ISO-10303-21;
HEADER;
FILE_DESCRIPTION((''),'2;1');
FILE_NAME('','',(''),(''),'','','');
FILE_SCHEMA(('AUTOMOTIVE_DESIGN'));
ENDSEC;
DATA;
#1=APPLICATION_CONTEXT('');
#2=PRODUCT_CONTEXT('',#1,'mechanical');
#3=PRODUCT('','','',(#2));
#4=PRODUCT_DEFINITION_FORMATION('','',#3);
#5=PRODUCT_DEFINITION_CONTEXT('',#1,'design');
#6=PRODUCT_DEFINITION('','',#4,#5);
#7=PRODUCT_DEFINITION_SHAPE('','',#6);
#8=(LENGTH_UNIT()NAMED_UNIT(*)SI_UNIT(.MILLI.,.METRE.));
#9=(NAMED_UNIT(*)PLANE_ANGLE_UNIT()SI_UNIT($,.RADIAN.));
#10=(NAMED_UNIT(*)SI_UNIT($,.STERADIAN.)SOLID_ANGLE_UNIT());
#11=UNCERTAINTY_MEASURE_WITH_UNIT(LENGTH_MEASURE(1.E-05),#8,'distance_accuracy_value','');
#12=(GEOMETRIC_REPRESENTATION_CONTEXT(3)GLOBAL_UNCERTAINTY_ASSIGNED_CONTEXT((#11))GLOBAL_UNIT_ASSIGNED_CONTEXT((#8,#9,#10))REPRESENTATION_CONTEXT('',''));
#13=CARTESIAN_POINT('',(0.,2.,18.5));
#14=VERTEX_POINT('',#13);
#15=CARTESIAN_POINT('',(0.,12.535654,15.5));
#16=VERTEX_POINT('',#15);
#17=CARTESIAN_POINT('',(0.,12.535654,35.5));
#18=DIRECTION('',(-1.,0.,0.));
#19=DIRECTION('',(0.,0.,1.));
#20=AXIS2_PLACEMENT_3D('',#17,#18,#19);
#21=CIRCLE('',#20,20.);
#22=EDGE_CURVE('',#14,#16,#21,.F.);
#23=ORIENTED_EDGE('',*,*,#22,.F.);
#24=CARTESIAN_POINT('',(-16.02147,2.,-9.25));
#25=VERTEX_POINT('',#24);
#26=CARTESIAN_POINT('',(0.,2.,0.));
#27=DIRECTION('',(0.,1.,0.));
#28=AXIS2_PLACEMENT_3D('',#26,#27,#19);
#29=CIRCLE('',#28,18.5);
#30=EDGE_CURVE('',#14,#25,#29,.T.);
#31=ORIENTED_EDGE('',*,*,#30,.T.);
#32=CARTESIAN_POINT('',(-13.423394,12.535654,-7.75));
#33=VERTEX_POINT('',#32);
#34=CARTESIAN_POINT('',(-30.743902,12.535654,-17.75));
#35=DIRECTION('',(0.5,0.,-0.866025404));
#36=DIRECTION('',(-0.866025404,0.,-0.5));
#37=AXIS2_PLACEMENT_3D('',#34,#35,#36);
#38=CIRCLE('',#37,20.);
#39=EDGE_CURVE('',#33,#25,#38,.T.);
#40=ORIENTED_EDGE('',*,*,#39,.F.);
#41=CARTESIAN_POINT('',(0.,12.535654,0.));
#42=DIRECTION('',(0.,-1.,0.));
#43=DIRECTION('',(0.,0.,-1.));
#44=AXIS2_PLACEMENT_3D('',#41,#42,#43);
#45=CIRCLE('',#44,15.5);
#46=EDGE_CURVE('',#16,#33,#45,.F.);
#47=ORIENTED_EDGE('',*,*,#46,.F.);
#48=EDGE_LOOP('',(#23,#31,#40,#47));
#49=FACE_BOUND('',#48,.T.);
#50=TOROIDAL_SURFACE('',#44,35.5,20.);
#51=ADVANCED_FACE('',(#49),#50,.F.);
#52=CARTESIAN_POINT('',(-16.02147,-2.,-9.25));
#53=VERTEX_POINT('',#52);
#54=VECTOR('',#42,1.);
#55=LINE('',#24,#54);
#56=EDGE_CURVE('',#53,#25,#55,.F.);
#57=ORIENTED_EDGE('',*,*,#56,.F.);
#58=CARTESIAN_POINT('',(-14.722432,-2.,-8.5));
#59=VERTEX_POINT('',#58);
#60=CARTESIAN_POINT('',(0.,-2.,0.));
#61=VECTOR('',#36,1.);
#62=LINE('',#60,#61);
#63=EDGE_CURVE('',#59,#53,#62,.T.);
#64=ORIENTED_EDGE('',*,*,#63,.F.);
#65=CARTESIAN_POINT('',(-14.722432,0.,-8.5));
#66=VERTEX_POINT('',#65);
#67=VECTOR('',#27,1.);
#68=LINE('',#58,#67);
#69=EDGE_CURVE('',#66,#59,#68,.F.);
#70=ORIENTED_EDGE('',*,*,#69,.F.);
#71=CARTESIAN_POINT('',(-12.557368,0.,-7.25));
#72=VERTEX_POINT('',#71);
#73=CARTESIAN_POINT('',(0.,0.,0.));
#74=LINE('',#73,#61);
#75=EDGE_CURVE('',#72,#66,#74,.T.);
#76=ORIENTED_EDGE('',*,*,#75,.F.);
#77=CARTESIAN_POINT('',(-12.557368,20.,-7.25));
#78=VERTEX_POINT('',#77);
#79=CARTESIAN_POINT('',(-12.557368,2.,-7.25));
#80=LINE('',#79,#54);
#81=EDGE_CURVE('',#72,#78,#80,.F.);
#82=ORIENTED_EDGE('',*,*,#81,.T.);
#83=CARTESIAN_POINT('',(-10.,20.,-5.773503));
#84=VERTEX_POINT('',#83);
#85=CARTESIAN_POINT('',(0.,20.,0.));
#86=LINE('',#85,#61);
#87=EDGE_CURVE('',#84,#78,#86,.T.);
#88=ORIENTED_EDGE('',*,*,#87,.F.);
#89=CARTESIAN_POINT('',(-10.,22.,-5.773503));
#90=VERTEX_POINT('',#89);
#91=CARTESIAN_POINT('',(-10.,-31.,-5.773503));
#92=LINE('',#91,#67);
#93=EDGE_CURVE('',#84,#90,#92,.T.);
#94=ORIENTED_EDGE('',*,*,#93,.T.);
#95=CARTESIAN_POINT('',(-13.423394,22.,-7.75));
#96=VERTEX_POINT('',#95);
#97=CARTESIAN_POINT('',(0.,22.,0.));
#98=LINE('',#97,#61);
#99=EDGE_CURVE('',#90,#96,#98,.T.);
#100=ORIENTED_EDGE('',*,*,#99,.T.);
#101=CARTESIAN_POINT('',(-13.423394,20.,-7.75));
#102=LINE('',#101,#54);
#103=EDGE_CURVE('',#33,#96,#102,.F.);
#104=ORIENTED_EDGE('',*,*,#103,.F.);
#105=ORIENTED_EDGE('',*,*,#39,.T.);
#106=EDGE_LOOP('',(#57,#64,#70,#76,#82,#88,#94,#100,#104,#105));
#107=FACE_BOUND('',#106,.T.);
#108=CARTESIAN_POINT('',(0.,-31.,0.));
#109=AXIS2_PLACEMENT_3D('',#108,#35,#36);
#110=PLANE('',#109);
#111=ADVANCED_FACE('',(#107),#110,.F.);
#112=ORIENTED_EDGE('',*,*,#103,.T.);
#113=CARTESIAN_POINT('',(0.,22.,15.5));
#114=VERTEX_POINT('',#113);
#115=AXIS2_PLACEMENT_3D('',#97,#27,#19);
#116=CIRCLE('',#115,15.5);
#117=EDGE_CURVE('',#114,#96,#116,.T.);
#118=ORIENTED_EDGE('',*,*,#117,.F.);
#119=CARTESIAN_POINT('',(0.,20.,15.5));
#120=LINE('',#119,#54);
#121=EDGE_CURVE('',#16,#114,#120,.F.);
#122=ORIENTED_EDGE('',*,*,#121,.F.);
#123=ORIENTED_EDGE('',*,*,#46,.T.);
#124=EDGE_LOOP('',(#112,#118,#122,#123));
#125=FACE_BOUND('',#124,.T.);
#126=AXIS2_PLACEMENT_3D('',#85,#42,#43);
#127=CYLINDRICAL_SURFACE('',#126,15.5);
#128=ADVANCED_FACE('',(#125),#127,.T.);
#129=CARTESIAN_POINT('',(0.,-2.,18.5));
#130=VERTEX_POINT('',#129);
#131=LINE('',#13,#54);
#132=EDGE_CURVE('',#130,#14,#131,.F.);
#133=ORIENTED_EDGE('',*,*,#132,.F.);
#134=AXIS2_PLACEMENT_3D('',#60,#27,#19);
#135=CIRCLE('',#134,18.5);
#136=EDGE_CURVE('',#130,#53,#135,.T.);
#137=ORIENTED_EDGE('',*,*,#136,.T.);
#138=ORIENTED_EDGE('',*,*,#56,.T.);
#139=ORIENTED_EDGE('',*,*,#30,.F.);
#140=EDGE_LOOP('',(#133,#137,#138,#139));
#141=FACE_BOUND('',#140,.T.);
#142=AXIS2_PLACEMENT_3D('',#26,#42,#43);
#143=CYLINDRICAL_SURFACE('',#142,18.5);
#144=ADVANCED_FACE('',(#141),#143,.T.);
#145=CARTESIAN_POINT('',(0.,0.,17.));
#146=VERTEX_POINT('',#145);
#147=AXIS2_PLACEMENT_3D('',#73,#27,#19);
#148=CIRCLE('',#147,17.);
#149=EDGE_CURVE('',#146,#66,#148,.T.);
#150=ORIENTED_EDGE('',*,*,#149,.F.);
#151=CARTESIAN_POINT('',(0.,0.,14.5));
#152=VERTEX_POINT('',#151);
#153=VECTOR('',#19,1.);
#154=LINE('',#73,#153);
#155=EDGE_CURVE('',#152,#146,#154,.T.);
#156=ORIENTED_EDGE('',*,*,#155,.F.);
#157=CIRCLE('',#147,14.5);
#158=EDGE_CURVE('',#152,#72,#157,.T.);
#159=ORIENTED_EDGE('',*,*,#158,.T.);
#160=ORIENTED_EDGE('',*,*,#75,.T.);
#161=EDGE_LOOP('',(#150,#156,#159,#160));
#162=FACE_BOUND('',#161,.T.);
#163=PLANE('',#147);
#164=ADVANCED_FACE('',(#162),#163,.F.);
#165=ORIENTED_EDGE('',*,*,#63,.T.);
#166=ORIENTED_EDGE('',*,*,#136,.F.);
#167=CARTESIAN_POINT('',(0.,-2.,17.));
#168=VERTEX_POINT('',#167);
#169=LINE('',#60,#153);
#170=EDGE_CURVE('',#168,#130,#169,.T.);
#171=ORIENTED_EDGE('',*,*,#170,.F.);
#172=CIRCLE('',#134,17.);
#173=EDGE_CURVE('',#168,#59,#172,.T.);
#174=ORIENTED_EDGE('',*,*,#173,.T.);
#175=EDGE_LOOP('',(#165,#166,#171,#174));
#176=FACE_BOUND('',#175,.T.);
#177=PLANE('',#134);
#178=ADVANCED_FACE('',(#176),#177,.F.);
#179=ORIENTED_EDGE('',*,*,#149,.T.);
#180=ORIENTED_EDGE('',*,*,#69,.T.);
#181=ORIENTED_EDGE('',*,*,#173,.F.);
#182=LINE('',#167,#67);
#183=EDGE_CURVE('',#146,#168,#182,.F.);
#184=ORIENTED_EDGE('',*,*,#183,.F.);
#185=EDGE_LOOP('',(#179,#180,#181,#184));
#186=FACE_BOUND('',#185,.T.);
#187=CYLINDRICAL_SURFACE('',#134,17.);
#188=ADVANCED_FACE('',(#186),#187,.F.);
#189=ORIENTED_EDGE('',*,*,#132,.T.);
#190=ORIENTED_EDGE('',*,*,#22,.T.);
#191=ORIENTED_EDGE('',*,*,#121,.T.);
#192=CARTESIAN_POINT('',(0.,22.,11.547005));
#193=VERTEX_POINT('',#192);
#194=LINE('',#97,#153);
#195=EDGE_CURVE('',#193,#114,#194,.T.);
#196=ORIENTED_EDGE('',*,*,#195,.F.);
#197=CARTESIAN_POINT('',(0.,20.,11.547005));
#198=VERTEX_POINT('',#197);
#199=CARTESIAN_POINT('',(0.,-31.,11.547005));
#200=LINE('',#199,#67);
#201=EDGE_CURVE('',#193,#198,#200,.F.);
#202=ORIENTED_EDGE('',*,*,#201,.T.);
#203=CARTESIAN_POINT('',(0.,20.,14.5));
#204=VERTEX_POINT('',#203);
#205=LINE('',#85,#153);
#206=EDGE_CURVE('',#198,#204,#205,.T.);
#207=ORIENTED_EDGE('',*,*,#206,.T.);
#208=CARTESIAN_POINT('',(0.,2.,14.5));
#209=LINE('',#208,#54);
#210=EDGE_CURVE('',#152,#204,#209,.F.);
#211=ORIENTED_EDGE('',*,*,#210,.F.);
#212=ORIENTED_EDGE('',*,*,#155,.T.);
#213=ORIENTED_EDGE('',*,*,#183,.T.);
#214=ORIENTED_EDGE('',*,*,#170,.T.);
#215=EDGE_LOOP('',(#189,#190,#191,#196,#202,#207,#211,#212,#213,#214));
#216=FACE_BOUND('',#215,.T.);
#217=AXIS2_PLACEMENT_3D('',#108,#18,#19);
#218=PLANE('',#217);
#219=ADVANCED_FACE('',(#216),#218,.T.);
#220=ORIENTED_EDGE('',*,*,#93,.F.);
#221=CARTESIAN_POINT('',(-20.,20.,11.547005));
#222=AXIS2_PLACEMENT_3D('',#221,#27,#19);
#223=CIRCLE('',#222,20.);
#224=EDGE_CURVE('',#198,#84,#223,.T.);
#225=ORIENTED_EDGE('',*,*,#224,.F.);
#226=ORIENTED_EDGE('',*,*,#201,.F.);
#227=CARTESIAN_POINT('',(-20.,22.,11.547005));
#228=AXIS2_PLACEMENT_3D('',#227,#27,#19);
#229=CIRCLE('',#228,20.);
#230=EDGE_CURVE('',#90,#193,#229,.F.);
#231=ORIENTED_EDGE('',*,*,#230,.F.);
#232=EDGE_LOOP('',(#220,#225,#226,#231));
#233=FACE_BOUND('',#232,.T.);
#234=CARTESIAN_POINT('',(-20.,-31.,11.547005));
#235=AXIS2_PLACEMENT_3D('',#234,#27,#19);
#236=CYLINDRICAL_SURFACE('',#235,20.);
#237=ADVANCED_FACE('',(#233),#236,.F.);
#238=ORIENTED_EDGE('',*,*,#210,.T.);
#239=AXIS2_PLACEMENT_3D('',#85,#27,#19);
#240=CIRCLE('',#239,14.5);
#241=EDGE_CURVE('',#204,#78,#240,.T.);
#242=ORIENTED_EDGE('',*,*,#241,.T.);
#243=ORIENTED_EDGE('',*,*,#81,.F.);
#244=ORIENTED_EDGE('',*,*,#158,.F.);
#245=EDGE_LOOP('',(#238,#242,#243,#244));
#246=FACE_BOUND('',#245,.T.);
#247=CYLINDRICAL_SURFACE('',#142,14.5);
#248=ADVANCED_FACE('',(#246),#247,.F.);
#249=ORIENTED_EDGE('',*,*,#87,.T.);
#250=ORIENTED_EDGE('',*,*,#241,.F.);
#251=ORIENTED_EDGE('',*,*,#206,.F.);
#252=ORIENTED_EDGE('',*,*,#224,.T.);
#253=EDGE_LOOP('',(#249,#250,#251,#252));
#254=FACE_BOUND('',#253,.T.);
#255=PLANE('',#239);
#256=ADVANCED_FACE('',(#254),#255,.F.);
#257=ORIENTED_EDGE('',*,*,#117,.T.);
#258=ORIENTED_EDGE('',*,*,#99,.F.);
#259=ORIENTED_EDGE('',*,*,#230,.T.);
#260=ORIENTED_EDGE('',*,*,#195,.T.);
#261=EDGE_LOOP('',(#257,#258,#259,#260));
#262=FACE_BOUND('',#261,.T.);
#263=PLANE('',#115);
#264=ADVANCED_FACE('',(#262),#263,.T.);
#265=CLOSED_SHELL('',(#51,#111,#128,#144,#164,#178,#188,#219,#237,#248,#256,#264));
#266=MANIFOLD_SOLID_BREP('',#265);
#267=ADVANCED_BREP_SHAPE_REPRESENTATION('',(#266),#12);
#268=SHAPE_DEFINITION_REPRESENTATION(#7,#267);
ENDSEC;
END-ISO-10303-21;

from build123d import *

# Parameters (mm, degrees)
SKETCH1_R           = 18.5
SKETCH1_R_2         = 14.5
BOSS_EXTRUDE2_DEPTH = 2
BOSS_EXTRUDE3_START = -2
SKETCH1_4_R         = 18.5
SKETCH1_4_R_2       = 17
BOSS_EXTRUDE3_DEPTH = 2
SKETCH1_5_R         = 15.5
SKETCH1_5_R_2       = 14.5
BOSS_EXTRUDE4_DEPTH = 20
BOSS_EXTRUDE5_START = 20
SKETCH1_6_R         = 15.5
BOSS_EXTRUDE5_DEPTH = 2
SKETCH2_W           = 20
SKETCH2_H           = 20
CUT_EXTRUDE3_DEPTH  = 31
FILLET2_R           = 20
FILLET3_ANGLE       = 240


with BuildPart() as part:
    # Sketch1 → Boss-Extrude2 (new body)
    with BuildSketch(Plane(origin=(0, 0, 0), x_dir=(1, 0, 0), z_dir=(0, 1, 0))):
        with Locations(Location((0, 0, 0), (0, 0, 270))):
            Circle(SKETCH1_R)
        with Locations(Location((0, 0, 0), (0, 0, 270))):
            Circle(SKETCH1_R_2, mode=Mode.SUBTRACT)
    extrude(amount=BOSS_EXTRUDE2_DEPTH)

    # Sketch1<4> → Boss-Extrude3 (add)
    with BuildSketch(Plane(origin=(0, 0, 0), x_dir=(1, 0, 0), z_dir=(0, 1, 0)).offset(BOSS_EXTRUDE3_START)):
        with Locations(Location((0, 0, 0), (0, 0, 270))):
            Circle(SKETCH1_4_R)
        with Locations(Location((0, 0, 0), (0, 0, 270))):
            Circle(SKETCH1_4_R_2, mode=Mode.SUBTRACT)
    extrude(amount=BOSS_EXTRUDE3_DEPTH)

    # Sketch1<5> → Boss-Extrude4 (add)
    with BuildSketch(Plane(origin=(0, 0, 0), x_dir=(1, 0, 0), z_dir=(0, 1, 0))):
        with Locations(Location((0, 0, 0), (0, 0, 270))):
            Circle(SKETCH1_5_R)
        with Locations(Location((0, 0, 0), (0, 0, 270))):
            Circle(SKETCH1_5_R_2, mode=Mode.SUBTRACT)
    extrude(amount=BOSS_EXTRUDE4_DEPTH)

    # Sketch1<6> → Boss-Extrude5 (add)
    with BuildSketch(Plane(origin=(0, 0, 0), x_dir=(1, 0, 0), z_dir=(0, 1, 0)).offset(BOSS_EXTRUDE5_START)):
        with Locations(Location((0, 0, 0), (0, 0, 270))):
            Circle(SKETCH1_6_R)
    extrude(amount=BOSS_EXTRUDE5_DEPTH)

    # Sketch2 → Cut-Extrude3 (cut, symmetric)
    with BuildSketch(Plane(origin=(0, 0, 0), x_dir=(1, 0, 0), z_dir=(0, 1, 0))):
        with Locations((-10, -10)):
            Rectangle(SKETCH2_W, SKETCH2_H)
        Polygon((0, 0), (-20, 11.547005384), (-20, 0), align=None)
    extrude(amount=CUT_EXTRUDE3_DEPTH, both=True, mode=Mode.SUBTRACT)

    # Fillet2
    fillet2_edges = [part.edges().sort_by_distance(p)[0] for p in [
        (0, 21, 0),
    ]]
    fillet(fillet2_edges, radius=FILLET2_R)

    # Fillet3: read off the stored shape, not the designer's step
    # Fillet3 outline → Fillet3 (revolve)
    with BuildSketch(Plane.ZY):
        with BuildLine():
            Line((15.5, 2), (18.5, 2))
            ThreePointArc((18.5, 2), (16.264615938, 7.058428178), (15.5, 12.535653753))
            Line((15.5, 12.535653753), (15.5, 2))
        make_face()
    revolve(axis=Axis((0, 0, 0), (0, 1, 0)), revolution_arc=FILLET3_ANGLE)


solid = part.part
